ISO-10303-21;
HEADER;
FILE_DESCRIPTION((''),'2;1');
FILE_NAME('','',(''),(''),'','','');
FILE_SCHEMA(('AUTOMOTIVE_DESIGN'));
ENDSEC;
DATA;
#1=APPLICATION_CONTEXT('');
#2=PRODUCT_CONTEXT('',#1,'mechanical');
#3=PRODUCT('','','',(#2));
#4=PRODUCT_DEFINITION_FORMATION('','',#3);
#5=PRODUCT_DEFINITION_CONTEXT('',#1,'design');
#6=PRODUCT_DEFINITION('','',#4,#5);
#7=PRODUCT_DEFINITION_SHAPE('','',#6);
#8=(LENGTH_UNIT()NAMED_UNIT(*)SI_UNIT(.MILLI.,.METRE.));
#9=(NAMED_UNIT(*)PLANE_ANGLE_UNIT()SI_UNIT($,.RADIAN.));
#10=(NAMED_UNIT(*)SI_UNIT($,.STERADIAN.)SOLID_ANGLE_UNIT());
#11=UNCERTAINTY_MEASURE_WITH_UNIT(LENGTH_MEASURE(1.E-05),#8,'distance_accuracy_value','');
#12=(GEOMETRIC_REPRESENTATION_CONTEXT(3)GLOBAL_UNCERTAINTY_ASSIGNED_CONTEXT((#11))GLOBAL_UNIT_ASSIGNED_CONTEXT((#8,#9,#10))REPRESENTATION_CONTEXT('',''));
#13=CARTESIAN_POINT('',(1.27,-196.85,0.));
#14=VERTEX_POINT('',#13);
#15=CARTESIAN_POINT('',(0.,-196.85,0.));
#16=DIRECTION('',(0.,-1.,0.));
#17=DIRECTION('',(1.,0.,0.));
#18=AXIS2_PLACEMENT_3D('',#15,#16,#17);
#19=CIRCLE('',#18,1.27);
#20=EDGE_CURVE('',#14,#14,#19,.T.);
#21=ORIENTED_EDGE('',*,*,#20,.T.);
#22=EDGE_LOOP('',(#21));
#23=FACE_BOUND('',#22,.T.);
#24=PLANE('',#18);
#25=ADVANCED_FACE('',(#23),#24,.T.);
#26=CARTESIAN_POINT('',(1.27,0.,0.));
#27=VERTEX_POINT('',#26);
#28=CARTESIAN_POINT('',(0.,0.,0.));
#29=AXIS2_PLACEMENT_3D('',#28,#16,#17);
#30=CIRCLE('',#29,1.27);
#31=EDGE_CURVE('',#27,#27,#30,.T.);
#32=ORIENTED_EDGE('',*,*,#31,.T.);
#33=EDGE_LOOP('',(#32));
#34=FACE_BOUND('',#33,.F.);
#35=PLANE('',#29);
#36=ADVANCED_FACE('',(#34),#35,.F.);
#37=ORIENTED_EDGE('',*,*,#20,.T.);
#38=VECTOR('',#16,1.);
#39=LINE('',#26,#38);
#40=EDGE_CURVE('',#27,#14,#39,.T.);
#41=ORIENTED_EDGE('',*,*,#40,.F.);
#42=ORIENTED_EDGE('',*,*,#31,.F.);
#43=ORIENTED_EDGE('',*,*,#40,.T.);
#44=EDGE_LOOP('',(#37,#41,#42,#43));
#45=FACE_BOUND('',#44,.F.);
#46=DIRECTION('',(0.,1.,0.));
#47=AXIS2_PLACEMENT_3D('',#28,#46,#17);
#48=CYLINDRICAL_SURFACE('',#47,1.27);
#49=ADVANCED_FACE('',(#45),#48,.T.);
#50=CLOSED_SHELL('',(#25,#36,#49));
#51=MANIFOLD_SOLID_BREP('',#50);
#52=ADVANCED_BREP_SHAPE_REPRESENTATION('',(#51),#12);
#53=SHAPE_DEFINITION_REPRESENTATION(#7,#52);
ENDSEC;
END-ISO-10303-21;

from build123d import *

# Parameters (mm, degrees)
F1_R     = 1.27
F2_DEPTH = 196.85


# Not quite as in the source:
# - a variable given as a bare number and used for a length is read in inches; the dataset says mm whatever the document's units were


with BuildPart() as f2:
    # F1 (on Front) → F2 (new body)
    with BuildSketch(Plane.XZ):
        Circle(F1_R)
    extrude(amount=F2_DEPTH)


solid = f2.part
